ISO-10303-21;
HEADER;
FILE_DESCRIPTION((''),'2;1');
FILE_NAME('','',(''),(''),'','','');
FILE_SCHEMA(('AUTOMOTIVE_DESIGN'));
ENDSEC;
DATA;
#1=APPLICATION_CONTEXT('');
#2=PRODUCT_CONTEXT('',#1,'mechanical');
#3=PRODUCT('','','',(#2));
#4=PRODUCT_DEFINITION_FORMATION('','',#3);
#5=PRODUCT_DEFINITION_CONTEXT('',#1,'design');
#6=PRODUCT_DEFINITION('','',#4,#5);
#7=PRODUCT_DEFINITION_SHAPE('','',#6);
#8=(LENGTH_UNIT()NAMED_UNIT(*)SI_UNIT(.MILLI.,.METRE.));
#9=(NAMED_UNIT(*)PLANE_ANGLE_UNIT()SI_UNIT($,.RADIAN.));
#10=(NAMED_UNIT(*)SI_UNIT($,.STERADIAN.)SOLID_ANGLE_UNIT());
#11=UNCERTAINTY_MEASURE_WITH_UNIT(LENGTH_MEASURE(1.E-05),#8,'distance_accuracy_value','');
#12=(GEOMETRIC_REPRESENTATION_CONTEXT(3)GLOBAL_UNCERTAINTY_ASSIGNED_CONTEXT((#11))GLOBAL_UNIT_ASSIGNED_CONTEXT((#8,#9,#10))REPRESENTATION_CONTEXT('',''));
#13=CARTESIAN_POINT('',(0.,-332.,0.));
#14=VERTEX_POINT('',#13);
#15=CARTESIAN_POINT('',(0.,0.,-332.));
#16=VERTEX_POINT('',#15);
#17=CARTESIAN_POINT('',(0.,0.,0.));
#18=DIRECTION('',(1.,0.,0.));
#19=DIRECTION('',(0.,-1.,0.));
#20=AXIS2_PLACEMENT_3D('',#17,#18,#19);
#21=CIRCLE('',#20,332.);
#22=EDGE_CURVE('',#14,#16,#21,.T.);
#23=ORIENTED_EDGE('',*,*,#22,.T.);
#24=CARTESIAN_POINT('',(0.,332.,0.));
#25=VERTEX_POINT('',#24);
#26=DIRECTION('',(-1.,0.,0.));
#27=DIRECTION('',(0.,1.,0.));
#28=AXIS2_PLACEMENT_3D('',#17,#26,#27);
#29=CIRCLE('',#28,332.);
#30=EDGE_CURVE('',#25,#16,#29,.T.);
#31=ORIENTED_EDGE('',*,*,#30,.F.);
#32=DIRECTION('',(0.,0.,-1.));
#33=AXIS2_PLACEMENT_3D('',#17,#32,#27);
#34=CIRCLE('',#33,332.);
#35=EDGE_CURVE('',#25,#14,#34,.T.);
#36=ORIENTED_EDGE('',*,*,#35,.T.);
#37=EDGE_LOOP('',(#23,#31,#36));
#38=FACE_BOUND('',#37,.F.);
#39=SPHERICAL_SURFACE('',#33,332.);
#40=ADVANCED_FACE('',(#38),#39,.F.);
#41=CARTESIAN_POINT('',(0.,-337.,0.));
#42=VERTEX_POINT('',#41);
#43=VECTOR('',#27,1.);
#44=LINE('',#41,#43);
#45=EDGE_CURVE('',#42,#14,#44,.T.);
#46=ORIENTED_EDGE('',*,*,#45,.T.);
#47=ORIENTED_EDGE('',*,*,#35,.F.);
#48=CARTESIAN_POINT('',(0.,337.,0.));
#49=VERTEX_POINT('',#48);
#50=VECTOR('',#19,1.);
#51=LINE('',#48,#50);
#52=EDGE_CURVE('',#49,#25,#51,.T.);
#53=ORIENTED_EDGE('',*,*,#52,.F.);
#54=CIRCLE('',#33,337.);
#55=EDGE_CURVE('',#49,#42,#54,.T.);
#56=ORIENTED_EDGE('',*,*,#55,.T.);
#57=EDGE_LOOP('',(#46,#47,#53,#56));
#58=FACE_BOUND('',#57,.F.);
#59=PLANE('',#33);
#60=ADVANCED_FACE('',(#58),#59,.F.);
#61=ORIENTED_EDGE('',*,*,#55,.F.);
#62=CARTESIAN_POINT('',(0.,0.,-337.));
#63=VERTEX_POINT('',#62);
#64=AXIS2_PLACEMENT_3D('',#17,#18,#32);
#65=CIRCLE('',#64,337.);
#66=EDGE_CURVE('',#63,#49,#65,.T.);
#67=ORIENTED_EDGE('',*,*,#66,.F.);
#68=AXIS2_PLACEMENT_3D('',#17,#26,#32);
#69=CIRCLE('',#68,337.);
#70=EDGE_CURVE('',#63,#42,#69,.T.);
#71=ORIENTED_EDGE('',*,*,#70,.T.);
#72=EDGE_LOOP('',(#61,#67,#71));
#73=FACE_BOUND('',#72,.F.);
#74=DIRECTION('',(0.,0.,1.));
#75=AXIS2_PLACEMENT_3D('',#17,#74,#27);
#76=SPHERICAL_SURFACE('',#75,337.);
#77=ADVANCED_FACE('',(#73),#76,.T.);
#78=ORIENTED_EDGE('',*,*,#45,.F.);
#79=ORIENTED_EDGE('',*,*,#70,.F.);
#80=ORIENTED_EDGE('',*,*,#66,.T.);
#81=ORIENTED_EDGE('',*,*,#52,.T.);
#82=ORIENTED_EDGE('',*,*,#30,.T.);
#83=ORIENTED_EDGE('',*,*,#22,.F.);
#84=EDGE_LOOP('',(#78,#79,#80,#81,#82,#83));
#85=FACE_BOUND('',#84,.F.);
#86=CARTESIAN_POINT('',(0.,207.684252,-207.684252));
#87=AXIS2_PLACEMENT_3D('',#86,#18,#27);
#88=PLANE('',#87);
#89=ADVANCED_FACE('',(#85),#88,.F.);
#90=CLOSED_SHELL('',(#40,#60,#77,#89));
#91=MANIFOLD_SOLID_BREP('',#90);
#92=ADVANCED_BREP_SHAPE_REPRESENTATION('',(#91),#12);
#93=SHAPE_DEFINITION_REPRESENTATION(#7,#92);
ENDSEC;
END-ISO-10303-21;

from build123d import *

# Parameters (mm, degrees)
F1_ANGLE_BACK = 90
F1_ANGLE      = 180


with BuildPart() as f1:
    # F0 (on Front) → F1 (revolve)
    with BuildSketch(Plane.XZ, mode=Mode.PRIVATE) as f1_sk:
        with BuildLine():
            ThreePointArc((332, 0), (234.7594513539, -234.7594513539), (0, -332))
            Line((0, -332), (0, -337))
            ThreePointArc((0, -337), (238.2949852599, -238.2949852599), (337, 0))
            Line((337, 0), (332, 0))
        make_face()
    revolve(f1_sk.sketch.rotate(Axis((0, 0, -166), (0, 0, -1)), -F1_ANGLE_BACK), axis=Axis((0, 0, -166), (0, 0, -1)), revolution_arc=F1_ANGLE)


solid = f1.part
